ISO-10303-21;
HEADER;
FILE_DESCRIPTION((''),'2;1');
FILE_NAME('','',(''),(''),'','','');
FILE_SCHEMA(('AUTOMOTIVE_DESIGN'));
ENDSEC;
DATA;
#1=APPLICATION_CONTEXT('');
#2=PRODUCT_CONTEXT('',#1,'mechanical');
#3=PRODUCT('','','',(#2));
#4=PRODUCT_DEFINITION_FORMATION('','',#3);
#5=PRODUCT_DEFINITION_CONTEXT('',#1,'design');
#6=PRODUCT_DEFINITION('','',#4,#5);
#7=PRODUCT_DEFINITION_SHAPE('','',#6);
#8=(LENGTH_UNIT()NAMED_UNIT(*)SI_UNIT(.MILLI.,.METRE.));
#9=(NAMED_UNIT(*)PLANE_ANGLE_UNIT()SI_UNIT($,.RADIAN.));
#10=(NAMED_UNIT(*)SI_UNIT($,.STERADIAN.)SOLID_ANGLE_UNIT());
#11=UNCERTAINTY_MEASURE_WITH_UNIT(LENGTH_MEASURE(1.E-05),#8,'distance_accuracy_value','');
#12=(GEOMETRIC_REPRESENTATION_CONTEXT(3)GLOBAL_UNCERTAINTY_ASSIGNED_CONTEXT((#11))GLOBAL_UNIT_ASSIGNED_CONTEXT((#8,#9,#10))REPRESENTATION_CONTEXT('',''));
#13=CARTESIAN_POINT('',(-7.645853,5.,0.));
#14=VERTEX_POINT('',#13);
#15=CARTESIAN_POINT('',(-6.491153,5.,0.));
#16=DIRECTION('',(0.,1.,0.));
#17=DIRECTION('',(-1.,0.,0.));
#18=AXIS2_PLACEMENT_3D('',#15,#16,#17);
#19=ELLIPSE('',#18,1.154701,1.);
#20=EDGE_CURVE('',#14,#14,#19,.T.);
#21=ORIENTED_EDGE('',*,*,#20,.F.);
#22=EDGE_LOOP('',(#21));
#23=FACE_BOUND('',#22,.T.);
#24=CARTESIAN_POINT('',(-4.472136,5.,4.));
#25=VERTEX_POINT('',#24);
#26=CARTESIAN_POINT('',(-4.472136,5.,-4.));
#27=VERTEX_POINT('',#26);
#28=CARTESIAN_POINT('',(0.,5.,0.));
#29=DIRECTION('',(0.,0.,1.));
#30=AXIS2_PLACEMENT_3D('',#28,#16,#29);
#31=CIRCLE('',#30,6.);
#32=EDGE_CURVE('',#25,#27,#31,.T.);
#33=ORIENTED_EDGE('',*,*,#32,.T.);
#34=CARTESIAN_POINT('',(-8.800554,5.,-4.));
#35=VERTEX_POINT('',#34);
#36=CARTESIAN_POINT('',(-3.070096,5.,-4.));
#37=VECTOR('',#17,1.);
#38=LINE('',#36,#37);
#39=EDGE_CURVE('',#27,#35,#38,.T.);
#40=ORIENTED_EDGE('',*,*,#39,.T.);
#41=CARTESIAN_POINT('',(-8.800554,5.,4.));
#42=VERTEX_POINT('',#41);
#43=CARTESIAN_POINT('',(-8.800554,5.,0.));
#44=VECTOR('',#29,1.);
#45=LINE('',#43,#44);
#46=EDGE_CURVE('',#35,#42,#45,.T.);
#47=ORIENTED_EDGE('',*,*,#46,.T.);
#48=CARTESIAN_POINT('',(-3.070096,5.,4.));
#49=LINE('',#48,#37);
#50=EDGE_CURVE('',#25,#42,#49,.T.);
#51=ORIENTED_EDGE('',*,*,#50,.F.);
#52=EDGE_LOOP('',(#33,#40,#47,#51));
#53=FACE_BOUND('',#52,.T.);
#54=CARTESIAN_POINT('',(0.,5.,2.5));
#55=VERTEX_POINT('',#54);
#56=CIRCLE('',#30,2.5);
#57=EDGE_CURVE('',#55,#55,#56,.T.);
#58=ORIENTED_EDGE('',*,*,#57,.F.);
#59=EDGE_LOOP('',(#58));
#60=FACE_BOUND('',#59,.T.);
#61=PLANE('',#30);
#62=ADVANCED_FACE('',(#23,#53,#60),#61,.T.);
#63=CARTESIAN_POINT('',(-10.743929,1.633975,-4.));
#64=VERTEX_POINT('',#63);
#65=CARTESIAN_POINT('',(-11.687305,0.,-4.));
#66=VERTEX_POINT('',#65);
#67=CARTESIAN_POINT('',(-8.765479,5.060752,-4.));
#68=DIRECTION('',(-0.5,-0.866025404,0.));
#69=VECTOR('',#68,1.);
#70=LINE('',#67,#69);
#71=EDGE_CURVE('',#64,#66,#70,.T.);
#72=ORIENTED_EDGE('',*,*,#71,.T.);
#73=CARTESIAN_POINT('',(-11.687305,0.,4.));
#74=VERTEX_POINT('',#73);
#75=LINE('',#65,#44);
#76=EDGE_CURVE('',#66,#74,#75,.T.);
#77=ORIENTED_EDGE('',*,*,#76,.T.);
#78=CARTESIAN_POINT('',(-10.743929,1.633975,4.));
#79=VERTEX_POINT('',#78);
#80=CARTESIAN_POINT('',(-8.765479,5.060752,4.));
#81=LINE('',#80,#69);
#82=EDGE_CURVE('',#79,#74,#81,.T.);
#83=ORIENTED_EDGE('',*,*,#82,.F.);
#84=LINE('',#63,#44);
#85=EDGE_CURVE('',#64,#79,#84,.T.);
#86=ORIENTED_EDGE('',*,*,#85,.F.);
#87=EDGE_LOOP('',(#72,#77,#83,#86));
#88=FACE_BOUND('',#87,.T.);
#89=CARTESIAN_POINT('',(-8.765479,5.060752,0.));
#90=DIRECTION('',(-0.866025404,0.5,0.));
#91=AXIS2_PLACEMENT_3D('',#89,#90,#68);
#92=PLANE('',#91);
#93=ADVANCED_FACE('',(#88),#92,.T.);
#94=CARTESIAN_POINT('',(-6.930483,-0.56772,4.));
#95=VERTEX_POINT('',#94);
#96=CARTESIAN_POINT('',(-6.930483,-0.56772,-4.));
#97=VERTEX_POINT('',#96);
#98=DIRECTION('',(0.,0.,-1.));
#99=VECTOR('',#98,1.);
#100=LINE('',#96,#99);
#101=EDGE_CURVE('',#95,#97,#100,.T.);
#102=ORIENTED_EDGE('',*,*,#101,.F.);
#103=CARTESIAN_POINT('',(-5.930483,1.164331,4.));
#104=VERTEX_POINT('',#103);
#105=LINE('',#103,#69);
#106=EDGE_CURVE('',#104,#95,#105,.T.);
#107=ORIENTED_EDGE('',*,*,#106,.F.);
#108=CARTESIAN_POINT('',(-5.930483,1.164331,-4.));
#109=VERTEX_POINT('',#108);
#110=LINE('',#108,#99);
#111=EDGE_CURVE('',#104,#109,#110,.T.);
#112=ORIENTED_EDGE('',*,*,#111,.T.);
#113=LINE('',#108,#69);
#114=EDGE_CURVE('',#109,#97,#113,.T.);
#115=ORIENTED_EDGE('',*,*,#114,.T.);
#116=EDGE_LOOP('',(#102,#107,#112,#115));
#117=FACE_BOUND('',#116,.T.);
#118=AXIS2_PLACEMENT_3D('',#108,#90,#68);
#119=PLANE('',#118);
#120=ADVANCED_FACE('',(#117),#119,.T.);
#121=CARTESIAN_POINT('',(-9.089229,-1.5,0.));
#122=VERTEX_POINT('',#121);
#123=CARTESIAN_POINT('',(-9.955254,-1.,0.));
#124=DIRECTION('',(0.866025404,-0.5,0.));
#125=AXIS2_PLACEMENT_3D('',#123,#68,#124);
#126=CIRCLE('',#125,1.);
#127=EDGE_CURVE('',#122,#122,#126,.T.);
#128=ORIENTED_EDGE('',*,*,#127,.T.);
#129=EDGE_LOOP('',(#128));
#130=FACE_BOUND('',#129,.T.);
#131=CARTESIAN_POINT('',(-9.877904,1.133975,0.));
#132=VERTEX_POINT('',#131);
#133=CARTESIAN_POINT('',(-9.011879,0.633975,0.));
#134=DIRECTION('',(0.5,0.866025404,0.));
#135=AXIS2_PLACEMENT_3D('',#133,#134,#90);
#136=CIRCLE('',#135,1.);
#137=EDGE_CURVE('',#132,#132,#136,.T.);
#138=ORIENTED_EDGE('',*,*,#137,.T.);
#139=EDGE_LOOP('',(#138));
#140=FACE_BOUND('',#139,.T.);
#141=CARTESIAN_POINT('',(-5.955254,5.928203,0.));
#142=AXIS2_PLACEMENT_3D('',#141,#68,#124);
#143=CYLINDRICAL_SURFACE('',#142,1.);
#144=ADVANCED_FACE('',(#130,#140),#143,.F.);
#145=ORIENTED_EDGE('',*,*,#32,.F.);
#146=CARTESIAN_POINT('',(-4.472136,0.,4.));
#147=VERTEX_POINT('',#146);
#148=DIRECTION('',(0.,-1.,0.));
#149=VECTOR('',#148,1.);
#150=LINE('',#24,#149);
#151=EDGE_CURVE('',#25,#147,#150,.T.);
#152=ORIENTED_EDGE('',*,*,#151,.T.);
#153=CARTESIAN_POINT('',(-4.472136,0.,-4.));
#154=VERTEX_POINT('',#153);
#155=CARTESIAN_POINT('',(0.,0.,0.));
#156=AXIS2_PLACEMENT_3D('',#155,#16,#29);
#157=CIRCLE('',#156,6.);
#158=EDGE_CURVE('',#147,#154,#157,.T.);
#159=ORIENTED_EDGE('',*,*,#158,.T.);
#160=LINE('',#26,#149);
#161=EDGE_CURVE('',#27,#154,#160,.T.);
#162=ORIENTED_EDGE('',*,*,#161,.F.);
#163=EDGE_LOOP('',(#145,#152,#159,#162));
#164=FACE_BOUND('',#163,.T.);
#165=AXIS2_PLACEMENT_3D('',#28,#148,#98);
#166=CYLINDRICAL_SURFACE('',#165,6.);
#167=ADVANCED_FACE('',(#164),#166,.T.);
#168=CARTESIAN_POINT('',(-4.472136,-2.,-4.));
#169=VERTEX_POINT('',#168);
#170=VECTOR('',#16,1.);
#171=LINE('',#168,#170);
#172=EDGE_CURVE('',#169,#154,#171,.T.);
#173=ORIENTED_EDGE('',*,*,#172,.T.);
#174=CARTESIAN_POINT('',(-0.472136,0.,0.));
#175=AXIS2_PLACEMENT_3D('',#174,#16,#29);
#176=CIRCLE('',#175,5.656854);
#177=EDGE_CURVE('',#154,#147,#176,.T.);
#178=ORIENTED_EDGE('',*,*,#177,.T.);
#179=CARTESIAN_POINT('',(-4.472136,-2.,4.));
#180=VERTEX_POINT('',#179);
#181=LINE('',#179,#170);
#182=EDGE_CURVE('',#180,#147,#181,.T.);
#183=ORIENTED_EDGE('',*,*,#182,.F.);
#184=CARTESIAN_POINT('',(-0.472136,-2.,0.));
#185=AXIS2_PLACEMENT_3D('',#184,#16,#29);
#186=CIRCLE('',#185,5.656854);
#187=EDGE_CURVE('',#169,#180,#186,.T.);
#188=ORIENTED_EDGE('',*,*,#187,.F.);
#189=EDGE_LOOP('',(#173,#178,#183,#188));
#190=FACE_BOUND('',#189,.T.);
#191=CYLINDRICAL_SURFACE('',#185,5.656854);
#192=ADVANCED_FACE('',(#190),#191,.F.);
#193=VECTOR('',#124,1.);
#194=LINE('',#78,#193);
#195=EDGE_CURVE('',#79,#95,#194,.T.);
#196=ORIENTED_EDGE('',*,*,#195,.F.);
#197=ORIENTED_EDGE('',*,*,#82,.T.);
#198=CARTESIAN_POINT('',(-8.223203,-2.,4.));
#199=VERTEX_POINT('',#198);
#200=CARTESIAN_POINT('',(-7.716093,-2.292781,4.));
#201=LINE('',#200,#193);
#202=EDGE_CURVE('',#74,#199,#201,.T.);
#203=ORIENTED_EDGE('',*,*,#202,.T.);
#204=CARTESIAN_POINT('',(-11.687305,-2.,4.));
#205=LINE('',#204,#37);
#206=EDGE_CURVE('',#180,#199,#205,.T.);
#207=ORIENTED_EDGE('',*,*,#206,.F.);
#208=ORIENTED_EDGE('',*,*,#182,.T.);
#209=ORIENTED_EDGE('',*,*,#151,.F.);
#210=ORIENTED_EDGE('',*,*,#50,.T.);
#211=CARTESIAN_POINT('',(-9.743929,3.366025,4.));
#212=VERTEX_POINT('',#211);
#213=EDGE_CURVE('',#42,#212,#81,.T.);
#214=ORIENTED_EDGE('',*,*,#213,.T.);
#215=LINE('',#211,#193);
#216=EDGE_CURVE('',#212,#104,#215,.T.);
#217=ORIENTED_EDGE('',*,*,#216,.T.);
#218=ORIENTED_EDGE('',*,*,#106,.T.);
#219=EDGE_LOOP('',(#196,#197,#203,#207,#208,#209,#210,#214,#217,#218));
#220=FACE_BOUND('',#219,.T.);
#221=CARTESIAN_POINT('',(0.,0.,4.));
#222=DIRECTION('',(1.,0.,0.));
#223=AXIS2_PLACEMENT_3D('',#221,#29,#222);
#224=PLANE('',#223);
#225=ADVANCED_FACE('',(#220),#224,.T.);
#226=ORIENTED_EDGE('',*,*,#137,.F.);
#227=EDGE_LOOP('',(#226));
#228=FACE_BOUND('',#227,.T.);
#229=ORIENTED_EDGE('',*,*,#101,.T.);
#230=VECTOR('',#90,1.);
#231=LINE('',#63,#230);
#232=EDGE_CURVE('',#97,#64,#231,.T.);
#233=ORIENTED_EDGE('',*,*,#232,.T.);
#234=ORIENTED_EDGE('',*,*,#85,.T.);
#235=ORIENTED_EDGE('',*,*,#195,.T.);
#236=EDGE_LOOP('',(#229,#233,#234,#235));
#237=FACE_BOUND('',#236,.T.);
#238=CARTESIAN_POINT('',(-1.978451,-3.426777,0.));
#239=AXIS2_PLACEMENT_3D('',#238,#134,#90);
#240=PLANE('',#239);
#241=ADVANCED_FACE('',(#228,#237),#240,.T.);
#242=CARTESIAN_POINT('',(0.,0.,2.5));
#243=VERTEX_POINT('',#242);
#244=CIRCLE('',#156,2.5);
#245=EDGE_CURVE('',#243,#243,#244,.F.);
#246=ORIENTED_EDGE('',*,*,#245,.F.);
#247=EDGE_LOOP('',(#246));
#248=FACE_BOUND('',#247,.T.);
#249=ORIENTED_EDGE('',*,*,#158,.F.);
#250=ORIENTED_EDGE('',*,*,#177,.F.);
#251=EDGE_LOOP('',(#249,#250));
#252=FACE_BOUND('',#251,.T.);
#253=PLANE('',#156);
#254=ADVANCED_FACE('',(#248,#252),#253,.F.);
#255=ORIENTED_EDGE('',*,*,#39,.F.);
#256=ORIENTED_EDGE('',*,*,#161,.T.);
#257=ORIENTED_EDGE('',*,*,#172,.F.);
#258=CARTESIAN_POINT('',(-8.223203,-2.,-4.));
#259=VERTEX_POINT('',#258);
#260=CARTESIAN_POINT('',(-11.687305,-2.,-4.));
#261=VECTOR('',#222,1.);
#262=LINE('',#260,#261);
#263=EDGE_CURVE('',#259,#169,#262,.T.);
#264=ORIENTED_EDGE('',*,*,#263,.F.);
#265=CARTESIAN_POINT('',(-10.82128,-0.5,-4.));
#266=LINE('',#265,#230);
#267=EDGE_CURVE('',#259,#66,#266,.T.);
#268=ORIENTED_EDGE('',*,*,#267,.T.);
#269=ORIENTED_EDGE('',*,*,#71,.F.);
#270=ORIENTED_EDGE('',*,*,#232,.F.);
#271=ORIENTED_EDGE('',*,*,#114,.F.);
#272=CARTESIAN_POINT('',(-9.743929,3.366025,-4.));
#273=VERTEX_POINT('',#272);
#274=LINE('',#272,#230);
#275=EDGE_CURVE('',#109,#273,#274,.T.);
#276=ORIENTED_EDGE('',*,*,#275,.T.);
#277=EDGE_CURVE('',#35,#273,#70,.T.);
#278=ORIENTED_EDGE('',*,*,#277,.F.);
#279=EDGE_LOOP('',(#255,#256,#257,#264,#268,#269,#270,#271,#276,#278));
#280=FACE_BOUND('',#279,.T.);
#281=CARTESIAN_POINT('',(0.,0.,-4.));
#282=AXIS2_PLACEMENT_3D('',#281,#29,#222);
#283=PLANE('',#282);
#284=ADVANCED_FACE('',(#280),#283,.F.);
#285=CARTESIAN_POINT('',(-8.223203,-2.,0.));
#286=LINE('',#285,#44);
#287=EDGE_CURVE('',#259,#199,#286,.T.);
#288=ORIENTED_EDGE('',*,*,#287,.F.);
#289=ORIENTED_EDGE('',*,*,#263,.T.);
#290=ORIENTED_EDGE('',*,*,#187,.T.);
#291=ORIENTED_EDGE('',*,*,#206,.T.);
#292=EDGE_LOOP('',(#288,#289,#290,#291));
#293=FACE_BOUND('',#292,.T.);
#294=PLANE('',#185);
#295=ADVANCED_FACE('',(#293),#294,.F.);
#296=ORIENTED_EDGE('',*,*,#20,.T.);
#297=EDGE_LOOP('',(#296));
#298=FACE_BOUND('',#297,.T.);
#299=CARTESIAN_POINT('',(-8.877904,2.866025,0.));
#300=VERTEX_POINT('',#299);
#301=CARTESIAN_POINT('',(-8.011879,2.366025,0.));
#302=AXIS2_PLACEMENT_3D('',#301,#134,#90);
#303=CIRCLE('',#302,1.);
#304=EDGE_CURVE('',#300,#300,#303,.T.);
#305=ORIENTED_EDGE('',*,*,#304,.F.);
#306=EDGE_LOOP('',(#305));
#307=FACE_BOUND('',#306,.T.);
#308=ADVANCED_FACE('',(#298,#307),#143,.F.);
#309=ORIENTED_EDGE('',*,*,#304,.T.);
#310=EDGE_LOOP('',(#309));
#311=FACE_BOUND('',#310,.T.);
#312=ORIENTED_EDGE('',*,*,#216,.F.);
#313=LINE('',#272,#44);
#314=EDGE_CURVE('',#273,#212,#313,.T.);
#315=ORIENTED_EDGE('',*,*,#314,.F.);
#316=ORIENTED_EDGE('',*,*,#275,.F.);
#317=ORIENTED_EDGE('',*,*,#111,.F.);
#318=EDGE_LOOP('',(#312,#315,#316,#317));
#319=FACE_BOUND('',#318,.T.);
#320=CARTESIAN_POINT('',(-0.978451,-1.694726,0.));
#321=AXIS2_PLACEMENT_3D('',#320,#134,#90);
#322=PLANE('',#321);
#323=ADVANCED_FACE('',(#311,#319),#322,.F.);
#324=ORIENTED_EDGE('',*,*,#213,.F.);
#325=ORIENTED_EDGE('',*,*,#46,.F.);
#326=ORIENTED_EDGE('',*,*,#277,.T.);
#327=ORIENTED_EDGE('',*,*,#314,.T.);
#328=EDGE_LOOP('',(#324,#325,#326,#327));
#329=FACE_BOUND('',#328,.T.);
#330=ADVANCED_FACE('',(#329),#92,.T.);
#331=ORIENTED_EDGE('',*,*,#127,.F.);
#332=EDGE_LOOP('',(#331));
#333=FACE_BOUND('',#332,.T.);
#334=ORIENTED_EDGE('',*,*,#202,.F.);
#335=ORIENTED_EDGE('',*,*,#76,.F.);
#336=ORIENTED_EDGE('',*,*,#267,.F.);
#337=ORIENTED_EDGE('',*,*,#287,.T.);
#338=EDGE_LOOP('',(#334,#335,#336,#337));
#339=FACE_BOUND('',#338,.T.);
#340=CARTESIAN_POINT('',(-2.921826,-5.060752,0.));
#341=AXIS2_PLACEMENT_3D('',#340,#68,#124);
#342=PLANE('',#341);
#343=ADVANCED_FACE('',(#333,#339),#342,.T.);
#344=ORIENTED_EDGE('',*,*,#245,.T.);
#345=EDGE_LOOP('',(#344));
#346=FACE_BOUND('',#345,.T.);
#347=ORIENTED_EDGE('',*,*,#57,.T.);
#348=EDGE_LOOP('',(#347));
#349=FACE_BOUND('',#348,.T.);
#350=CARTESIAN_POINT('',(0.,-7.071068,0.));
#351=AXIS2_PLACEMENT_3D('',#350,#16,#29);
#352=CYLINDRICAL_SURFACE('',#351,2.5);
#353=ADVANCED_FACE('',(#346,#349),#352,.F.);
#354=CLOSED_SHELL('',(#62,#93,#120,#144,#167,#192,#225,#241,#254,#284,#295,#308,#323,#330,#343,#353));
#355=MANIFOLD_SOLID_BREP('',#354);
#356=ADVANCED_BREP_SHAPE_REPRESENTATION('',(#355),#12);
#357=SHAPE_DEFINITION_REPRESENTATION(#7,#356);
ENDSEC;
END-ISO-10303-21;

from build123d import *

# Parameters (mm, degrees)
SKETCH_2_R               = 6
EXTRUDE_1_DEPTH          = 5
SKETCH_3_R               = 2.5
CUT_EXTRUDE_1_DEPTH      = 5
SKETCH_4_W               = 8.617209121
SKETCH_4_H               = 5
EXTRUDE_2_DEPTH          = 4
SKETCH_5_W               = 17.690730237
SKETCH_5_H               = 8.258947269
CUT_EXTRUDE_3_DEPTH      = 4.5
EXTRUDE_5_DEPTH          = 2
CUT_EXTRUDE_7_DEPTH      = 1
CUT_EXTRUDE_7_DEPTH_BACK = 1
SKETCH_10_W              = 4.403388768
SKETCH_10_H              = 8
CUT_EXTRUDE_8_DEPTH      = 4
SKETCH_15_R              = 1
CUT_EXTRUDE_9_DEPTH      = 8


with BuildPart() as part:
    # 草图2 → 凸台-拉伸1 (new body)
    with BuildSketch(Plane(origin=(0, 0, 0), x_dir=(1, 0, 0), z_dir=(0, 1, 0))):
        with Locations(Location((0, 0, 0), (0, 0, 270))):
            Circle(SKETCH_2_R)
    extrude(amount=EXTRUDE_1_DEPTH)

    # 草图3 → 切除-拉伸1 (cut)
    with BuildSketch(Plane(origin=(0, 5, 0), x_dir=(1, 0, 0), z_dir=(0, 1, 0))):
        with Locations(Location((0, 0, 0), (0, 0, 270))):
            Circle(SKETCH_3_R)
    extrude(amount=-CUT_EXTRUDE_1_DEPTH, mode=Mode.SUBTRACT)

    # 草图4 → 凸台-拉伸2 (add, symmetric)
    with BuildSketch(Plane.XY):
        with Locations((-7.378700456, 2.5)):
            Rectangle(SKETCH_4_W, SKETCH_4_H)
    extrude(amount=EXTRUDE_2_DEPTH, both=True)

    # 草图5 → 切除-拉伸3 (cut)
    with BuildSketch(Plane(origin=(-8.765478763, 5.060751523, 0), x_dir=(0, 0, 1), z_dir=(0.8660254037844398, -0.499999999999998, 0))):
        with Locations((1.152187915, 4.129473635)):
            Rectangle(SKETCH_5_W, SKETCH_5_H)
    extrude(amount=-CUT_EXTRUDE_3_DEPTH, mode=Mode.SUBTRACT)

    # 草图12 → 凸台-拉伸5 (add)
    with BuildSketch(Plane.XZ):
        with BuildLine():
            Line((-11.687305017, 4), (-4.472135955, 4))
            ThreePointArc((-4.472135955, 4), (-6.128990204, 0), (-4.472135955, -4))
            Line((-4.472135955, -4), (-11.687305017, -4))
            Line((-11.687305017, -4), (-11.687305017, 4))
        make_face()
    extrude(amount=EXTRUDE_5_DEPTH)

    # 草图10 → 切除-拉伸7 (cut, two sides: drawn at the far end of the back side and taken through both)
    with BuildSketch(Plane(origin=(-1.478450581, -2.560751523, 0), x_dir=(0.8660254037844398, -0.49999999999999806, 0), z_dir=(0.499999999999998, 0.8660254037844397, 0)).offset(-CUT_EXTRUDE_7_DEPTH_BACK)):
        with Locations((-7.919808662, 0)):
            Rectangle(SKETCH_10_W, SKETCH_10_H)
    extrude(amount=CUT_EXTRUDE_7_DEPTH + CUT_EXTRUDE_7_DEPTH_BACK, mode=Mode.SUBTRACT)

    # 草图14 → 切除-拉伸8 (cut)
    with BuildSketch(Plane(origin=(-2.921826254, -5.060751523, 0), x_dir=(0.8660254037844398, -0.499999999999998, 0), z_dir=(0.49999999999999806, 0.8660254037844399, 0))):
        Polygon((-9.121503046, 4), (-5.535941973, 4), (-5.535941973, -4), (-9.121503046, -4), (-10.121503046, -4), (-10.121503046, 4), align=None)
    extrude(amount=-CUT_EXTRUDE_8_DEPTH, mode=Mode.SUBTRACT)

    # 草图15 → 切除-拉伸9 (cut)
    with BuildSketch(Plane(origin=(-2.921826254, -5.060751523, 0), x_dir=(0.8660254037844397, -0.4999999999999983, 0), z_dir=(-0.4999999999999982, -0.8660254037844396, 0))):
        with Locations((-8.121503046, 0)):
            Circle(SKETCH_15_R)
    extrude(amount=-CUT_EXTRUDE_9_DEPTH, mode=Mode.SUBTRACT)


solid = part.part
